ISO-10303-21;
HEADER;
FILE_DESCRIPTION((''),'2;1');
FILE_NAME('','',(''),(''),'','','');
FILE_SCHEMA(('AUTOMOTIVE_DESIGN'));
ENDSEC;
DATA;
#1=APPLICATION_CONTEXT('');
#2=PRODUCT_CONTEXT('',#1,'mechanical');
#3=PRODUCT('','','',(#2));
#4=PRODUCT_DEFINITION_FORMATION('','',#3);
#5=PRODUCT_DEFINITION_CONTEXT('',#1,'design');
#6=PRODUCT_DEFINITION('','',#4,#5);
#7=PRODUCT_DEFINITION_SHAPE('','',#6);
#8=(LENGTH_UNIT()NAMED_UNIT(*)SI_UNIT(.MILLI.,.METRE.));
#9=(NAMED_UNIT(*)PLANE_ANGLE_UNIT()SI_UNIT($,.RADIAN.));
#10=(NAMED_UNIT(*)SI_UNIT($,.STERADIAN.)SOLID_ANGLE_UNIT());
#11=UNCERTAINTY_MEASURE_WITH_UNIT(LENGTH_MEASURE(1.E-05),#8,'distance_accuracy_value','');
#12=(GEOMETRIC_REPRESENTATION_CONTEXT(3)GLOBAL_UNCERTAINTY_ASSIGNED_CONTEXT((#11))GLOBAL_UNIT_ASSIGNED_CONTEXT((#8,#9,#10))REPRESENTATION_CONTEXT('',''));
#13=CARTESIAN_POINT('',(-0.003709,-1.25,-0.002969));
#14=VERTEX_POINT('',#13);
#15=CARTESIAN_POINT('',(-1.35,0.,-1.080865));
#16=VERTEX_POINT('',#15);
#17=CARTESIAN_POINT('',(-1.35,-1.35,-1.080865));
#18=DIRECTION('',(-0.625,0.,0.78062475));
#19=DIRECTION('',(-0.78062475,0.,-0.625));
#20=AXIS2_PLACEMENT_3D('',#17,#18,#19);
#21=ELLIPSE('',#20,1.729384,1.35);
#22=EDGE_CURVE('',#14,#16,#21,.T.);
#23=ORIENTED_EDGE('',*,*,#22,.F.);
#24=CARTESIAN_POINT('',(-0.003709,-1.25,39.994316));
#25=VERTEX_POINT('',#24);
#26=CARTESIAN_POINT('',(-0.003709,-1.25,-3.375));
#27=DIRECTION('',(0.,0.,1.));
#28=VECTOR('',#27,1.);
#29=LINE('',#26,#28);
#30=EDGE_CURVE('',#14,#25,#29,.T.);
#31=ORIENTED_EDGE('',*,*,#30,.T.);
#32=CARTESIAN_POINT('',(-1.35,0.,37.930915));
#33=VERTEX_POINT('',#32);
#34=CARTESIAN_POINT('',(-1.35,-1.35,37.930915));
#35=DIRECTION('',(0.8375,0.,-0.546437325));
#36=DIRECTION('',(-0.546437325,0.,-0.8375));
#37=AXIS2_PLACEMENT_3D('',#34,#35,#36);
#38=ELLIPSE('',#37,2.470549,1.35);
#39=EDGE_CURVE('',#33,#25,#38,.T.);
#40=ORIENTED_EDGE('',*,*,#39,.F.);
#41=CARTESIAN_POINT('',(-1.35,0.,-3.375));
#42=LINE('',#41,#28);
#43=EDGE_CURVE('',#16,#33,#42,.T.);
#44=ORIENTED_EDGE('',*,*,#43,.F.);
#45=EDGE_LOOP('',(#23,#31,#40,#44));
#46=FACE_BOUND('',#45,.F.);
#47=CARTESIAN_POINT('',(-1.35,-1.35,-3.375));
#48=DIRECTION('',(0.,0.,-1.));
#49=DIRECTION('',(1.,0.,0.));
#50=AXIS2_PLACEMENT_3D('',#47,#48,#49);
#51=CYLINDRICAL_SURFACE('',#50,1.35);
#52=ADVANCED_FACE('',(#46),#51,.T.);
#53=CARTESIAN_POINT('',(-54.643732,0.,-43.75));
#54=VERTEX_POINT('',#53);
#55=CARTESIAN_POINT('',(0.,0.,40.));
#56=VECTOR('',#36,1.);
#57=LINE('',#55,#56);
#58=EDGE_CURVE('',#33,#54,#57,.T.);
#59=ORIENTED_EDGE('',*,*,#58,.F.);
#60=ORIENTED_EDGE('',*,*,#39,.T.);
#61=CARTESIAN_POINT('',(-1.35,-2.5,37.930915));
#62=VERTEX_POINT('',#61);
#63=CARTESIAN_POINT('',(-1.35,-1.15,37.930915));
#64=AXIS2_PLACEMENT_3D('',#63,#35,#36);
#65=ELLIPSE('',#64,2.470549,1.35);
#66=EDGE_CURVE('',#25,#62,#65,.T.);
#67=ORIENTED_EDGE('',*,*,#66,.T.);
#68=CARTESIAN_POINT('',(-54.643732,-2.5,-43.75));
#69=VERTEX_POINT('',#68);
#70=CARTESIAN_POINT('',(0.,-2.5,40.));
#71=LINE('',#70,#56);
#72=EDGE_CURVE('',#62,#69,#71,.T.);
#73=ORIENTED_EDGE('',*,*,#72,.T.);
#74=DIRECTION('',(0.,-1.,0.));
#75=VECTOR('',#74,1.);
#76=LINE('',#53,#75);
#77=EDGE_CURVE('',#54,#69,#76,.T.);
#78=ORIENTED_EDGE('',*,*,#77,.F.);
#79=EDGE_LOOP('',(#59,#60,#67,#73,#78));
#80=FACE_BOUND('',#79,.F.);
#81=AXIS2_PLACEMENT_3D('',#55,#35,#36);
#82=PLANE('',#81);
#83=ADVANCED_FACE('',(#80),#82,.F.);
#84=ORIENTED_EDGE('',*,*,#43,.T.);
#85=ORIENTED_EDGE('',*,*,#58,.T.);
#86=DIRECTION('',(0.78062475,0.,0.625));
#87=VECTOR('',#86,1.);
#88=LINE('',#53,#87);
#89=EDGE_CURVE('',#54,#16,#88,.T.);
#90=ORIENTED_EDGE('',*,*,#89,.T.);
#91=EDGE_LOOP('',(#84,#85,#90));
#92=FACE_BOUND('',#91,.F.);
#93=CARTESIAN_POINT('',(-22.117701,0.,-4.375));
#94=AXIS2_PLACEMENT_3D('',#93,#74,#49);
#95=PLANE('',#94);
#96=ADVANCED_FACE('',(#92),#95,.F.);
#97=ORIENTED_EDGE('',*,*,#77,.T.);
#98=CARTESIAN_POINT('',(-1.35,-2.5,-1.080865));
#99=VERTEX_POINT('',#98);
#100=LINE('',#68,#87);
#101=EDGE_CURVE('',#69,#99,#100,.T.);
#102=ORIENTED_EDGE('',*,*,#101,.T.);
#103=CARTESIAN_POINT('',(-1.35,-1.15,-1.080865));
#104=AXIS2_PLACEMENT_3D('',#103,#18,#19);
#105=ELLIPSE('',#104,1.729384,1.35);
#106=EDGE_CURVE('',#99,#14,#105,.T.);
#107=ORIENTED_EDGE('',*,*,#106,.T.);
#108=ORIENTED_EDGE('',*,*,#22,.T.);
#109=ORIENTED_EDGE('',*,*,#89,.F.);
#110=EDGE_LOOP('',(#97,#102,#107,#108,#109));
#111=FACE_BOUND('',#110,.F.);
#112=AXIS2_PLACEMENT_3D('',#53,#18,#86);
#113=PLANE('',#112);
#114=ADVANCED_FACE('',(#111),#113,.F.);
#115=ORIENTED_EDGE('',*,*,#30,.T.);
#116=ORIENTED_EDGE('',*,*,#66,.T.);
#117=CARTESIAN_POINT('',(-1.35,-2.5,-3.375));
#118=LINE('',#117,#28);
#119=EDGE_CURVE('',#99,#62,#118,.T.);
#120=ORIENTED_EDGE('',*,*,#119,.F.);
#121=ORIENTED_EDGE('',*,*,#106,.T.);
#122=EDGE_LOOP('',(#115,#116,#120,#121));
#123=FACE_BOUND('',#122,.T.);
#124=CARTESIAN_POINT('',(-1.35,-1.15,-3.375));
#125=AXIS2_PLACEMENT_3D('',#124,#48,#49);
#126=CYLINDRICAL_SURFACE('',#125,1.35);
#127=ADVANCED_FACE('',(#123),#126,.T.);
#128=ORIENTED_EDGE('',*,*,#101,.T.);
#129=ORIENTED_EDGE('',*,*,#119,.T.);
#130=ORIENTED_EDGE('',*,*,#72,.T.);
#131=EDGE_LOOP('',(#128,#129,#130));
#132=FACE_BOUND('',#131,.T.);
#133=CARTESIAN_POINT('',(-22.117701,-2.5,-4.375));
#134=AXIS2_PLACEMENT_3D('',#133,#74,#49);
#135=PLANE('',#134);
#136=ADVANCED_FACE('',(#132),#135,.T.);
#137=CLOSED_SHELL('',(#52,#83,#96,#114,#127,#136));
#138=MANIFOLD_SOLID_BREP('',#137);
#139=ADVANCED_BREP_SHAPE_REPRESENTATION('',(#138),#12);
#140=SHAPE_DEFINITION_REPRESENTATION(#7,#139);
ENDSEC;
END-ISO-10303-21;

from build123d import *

# Parameters (mm, degrees)
F1_DEPTH    = 2.5
F2_T1_DEPTH = 46.75


# Not quite as in the source:
# - a fillet or chamfer that OpenCascade refuses, or shapes differently, is made with other operations: its cross-section is extruded or revolved along the edge and cut away or added


with BuildPart() as f1:
    # F0 (on Front) → F1 (new body)
    with BuildSketch(Plane.XZ):
        Polygon((-54.643732486, -43.75), (0, 0), (0, 40), align=None)
    extrude(amount=F1_DEPTH)

    # F2: fillet of radius 1.35 on 2 edges, made by hand

    # F2_s2 → F2_t1 (cut)
    with BuildSketch(Plane.XY.offset(-3.375)):
        with BuildLine():
            ThreePointArc((0, -1.15), (-0.3954058454, -2.1045941546), (-1.35, -2.5))
            Line((-1.35, -2.5), (0, -2.5))
            Line((0, -2.5), (0, -1.15))
        make_face()
        with BuildLine():
            ThreePointArc((0, -1.35), (-0.3954058454, -0.3954058454), (-1.35, 0))
            Line((-1.35, 0), (0, 0))
            Line((0, 0), (0, -1.35))
        make_face()
    extrude(amount=F2_T1_DEPTH, mode=Mode.SUBTRACT)


solid = f1.part
